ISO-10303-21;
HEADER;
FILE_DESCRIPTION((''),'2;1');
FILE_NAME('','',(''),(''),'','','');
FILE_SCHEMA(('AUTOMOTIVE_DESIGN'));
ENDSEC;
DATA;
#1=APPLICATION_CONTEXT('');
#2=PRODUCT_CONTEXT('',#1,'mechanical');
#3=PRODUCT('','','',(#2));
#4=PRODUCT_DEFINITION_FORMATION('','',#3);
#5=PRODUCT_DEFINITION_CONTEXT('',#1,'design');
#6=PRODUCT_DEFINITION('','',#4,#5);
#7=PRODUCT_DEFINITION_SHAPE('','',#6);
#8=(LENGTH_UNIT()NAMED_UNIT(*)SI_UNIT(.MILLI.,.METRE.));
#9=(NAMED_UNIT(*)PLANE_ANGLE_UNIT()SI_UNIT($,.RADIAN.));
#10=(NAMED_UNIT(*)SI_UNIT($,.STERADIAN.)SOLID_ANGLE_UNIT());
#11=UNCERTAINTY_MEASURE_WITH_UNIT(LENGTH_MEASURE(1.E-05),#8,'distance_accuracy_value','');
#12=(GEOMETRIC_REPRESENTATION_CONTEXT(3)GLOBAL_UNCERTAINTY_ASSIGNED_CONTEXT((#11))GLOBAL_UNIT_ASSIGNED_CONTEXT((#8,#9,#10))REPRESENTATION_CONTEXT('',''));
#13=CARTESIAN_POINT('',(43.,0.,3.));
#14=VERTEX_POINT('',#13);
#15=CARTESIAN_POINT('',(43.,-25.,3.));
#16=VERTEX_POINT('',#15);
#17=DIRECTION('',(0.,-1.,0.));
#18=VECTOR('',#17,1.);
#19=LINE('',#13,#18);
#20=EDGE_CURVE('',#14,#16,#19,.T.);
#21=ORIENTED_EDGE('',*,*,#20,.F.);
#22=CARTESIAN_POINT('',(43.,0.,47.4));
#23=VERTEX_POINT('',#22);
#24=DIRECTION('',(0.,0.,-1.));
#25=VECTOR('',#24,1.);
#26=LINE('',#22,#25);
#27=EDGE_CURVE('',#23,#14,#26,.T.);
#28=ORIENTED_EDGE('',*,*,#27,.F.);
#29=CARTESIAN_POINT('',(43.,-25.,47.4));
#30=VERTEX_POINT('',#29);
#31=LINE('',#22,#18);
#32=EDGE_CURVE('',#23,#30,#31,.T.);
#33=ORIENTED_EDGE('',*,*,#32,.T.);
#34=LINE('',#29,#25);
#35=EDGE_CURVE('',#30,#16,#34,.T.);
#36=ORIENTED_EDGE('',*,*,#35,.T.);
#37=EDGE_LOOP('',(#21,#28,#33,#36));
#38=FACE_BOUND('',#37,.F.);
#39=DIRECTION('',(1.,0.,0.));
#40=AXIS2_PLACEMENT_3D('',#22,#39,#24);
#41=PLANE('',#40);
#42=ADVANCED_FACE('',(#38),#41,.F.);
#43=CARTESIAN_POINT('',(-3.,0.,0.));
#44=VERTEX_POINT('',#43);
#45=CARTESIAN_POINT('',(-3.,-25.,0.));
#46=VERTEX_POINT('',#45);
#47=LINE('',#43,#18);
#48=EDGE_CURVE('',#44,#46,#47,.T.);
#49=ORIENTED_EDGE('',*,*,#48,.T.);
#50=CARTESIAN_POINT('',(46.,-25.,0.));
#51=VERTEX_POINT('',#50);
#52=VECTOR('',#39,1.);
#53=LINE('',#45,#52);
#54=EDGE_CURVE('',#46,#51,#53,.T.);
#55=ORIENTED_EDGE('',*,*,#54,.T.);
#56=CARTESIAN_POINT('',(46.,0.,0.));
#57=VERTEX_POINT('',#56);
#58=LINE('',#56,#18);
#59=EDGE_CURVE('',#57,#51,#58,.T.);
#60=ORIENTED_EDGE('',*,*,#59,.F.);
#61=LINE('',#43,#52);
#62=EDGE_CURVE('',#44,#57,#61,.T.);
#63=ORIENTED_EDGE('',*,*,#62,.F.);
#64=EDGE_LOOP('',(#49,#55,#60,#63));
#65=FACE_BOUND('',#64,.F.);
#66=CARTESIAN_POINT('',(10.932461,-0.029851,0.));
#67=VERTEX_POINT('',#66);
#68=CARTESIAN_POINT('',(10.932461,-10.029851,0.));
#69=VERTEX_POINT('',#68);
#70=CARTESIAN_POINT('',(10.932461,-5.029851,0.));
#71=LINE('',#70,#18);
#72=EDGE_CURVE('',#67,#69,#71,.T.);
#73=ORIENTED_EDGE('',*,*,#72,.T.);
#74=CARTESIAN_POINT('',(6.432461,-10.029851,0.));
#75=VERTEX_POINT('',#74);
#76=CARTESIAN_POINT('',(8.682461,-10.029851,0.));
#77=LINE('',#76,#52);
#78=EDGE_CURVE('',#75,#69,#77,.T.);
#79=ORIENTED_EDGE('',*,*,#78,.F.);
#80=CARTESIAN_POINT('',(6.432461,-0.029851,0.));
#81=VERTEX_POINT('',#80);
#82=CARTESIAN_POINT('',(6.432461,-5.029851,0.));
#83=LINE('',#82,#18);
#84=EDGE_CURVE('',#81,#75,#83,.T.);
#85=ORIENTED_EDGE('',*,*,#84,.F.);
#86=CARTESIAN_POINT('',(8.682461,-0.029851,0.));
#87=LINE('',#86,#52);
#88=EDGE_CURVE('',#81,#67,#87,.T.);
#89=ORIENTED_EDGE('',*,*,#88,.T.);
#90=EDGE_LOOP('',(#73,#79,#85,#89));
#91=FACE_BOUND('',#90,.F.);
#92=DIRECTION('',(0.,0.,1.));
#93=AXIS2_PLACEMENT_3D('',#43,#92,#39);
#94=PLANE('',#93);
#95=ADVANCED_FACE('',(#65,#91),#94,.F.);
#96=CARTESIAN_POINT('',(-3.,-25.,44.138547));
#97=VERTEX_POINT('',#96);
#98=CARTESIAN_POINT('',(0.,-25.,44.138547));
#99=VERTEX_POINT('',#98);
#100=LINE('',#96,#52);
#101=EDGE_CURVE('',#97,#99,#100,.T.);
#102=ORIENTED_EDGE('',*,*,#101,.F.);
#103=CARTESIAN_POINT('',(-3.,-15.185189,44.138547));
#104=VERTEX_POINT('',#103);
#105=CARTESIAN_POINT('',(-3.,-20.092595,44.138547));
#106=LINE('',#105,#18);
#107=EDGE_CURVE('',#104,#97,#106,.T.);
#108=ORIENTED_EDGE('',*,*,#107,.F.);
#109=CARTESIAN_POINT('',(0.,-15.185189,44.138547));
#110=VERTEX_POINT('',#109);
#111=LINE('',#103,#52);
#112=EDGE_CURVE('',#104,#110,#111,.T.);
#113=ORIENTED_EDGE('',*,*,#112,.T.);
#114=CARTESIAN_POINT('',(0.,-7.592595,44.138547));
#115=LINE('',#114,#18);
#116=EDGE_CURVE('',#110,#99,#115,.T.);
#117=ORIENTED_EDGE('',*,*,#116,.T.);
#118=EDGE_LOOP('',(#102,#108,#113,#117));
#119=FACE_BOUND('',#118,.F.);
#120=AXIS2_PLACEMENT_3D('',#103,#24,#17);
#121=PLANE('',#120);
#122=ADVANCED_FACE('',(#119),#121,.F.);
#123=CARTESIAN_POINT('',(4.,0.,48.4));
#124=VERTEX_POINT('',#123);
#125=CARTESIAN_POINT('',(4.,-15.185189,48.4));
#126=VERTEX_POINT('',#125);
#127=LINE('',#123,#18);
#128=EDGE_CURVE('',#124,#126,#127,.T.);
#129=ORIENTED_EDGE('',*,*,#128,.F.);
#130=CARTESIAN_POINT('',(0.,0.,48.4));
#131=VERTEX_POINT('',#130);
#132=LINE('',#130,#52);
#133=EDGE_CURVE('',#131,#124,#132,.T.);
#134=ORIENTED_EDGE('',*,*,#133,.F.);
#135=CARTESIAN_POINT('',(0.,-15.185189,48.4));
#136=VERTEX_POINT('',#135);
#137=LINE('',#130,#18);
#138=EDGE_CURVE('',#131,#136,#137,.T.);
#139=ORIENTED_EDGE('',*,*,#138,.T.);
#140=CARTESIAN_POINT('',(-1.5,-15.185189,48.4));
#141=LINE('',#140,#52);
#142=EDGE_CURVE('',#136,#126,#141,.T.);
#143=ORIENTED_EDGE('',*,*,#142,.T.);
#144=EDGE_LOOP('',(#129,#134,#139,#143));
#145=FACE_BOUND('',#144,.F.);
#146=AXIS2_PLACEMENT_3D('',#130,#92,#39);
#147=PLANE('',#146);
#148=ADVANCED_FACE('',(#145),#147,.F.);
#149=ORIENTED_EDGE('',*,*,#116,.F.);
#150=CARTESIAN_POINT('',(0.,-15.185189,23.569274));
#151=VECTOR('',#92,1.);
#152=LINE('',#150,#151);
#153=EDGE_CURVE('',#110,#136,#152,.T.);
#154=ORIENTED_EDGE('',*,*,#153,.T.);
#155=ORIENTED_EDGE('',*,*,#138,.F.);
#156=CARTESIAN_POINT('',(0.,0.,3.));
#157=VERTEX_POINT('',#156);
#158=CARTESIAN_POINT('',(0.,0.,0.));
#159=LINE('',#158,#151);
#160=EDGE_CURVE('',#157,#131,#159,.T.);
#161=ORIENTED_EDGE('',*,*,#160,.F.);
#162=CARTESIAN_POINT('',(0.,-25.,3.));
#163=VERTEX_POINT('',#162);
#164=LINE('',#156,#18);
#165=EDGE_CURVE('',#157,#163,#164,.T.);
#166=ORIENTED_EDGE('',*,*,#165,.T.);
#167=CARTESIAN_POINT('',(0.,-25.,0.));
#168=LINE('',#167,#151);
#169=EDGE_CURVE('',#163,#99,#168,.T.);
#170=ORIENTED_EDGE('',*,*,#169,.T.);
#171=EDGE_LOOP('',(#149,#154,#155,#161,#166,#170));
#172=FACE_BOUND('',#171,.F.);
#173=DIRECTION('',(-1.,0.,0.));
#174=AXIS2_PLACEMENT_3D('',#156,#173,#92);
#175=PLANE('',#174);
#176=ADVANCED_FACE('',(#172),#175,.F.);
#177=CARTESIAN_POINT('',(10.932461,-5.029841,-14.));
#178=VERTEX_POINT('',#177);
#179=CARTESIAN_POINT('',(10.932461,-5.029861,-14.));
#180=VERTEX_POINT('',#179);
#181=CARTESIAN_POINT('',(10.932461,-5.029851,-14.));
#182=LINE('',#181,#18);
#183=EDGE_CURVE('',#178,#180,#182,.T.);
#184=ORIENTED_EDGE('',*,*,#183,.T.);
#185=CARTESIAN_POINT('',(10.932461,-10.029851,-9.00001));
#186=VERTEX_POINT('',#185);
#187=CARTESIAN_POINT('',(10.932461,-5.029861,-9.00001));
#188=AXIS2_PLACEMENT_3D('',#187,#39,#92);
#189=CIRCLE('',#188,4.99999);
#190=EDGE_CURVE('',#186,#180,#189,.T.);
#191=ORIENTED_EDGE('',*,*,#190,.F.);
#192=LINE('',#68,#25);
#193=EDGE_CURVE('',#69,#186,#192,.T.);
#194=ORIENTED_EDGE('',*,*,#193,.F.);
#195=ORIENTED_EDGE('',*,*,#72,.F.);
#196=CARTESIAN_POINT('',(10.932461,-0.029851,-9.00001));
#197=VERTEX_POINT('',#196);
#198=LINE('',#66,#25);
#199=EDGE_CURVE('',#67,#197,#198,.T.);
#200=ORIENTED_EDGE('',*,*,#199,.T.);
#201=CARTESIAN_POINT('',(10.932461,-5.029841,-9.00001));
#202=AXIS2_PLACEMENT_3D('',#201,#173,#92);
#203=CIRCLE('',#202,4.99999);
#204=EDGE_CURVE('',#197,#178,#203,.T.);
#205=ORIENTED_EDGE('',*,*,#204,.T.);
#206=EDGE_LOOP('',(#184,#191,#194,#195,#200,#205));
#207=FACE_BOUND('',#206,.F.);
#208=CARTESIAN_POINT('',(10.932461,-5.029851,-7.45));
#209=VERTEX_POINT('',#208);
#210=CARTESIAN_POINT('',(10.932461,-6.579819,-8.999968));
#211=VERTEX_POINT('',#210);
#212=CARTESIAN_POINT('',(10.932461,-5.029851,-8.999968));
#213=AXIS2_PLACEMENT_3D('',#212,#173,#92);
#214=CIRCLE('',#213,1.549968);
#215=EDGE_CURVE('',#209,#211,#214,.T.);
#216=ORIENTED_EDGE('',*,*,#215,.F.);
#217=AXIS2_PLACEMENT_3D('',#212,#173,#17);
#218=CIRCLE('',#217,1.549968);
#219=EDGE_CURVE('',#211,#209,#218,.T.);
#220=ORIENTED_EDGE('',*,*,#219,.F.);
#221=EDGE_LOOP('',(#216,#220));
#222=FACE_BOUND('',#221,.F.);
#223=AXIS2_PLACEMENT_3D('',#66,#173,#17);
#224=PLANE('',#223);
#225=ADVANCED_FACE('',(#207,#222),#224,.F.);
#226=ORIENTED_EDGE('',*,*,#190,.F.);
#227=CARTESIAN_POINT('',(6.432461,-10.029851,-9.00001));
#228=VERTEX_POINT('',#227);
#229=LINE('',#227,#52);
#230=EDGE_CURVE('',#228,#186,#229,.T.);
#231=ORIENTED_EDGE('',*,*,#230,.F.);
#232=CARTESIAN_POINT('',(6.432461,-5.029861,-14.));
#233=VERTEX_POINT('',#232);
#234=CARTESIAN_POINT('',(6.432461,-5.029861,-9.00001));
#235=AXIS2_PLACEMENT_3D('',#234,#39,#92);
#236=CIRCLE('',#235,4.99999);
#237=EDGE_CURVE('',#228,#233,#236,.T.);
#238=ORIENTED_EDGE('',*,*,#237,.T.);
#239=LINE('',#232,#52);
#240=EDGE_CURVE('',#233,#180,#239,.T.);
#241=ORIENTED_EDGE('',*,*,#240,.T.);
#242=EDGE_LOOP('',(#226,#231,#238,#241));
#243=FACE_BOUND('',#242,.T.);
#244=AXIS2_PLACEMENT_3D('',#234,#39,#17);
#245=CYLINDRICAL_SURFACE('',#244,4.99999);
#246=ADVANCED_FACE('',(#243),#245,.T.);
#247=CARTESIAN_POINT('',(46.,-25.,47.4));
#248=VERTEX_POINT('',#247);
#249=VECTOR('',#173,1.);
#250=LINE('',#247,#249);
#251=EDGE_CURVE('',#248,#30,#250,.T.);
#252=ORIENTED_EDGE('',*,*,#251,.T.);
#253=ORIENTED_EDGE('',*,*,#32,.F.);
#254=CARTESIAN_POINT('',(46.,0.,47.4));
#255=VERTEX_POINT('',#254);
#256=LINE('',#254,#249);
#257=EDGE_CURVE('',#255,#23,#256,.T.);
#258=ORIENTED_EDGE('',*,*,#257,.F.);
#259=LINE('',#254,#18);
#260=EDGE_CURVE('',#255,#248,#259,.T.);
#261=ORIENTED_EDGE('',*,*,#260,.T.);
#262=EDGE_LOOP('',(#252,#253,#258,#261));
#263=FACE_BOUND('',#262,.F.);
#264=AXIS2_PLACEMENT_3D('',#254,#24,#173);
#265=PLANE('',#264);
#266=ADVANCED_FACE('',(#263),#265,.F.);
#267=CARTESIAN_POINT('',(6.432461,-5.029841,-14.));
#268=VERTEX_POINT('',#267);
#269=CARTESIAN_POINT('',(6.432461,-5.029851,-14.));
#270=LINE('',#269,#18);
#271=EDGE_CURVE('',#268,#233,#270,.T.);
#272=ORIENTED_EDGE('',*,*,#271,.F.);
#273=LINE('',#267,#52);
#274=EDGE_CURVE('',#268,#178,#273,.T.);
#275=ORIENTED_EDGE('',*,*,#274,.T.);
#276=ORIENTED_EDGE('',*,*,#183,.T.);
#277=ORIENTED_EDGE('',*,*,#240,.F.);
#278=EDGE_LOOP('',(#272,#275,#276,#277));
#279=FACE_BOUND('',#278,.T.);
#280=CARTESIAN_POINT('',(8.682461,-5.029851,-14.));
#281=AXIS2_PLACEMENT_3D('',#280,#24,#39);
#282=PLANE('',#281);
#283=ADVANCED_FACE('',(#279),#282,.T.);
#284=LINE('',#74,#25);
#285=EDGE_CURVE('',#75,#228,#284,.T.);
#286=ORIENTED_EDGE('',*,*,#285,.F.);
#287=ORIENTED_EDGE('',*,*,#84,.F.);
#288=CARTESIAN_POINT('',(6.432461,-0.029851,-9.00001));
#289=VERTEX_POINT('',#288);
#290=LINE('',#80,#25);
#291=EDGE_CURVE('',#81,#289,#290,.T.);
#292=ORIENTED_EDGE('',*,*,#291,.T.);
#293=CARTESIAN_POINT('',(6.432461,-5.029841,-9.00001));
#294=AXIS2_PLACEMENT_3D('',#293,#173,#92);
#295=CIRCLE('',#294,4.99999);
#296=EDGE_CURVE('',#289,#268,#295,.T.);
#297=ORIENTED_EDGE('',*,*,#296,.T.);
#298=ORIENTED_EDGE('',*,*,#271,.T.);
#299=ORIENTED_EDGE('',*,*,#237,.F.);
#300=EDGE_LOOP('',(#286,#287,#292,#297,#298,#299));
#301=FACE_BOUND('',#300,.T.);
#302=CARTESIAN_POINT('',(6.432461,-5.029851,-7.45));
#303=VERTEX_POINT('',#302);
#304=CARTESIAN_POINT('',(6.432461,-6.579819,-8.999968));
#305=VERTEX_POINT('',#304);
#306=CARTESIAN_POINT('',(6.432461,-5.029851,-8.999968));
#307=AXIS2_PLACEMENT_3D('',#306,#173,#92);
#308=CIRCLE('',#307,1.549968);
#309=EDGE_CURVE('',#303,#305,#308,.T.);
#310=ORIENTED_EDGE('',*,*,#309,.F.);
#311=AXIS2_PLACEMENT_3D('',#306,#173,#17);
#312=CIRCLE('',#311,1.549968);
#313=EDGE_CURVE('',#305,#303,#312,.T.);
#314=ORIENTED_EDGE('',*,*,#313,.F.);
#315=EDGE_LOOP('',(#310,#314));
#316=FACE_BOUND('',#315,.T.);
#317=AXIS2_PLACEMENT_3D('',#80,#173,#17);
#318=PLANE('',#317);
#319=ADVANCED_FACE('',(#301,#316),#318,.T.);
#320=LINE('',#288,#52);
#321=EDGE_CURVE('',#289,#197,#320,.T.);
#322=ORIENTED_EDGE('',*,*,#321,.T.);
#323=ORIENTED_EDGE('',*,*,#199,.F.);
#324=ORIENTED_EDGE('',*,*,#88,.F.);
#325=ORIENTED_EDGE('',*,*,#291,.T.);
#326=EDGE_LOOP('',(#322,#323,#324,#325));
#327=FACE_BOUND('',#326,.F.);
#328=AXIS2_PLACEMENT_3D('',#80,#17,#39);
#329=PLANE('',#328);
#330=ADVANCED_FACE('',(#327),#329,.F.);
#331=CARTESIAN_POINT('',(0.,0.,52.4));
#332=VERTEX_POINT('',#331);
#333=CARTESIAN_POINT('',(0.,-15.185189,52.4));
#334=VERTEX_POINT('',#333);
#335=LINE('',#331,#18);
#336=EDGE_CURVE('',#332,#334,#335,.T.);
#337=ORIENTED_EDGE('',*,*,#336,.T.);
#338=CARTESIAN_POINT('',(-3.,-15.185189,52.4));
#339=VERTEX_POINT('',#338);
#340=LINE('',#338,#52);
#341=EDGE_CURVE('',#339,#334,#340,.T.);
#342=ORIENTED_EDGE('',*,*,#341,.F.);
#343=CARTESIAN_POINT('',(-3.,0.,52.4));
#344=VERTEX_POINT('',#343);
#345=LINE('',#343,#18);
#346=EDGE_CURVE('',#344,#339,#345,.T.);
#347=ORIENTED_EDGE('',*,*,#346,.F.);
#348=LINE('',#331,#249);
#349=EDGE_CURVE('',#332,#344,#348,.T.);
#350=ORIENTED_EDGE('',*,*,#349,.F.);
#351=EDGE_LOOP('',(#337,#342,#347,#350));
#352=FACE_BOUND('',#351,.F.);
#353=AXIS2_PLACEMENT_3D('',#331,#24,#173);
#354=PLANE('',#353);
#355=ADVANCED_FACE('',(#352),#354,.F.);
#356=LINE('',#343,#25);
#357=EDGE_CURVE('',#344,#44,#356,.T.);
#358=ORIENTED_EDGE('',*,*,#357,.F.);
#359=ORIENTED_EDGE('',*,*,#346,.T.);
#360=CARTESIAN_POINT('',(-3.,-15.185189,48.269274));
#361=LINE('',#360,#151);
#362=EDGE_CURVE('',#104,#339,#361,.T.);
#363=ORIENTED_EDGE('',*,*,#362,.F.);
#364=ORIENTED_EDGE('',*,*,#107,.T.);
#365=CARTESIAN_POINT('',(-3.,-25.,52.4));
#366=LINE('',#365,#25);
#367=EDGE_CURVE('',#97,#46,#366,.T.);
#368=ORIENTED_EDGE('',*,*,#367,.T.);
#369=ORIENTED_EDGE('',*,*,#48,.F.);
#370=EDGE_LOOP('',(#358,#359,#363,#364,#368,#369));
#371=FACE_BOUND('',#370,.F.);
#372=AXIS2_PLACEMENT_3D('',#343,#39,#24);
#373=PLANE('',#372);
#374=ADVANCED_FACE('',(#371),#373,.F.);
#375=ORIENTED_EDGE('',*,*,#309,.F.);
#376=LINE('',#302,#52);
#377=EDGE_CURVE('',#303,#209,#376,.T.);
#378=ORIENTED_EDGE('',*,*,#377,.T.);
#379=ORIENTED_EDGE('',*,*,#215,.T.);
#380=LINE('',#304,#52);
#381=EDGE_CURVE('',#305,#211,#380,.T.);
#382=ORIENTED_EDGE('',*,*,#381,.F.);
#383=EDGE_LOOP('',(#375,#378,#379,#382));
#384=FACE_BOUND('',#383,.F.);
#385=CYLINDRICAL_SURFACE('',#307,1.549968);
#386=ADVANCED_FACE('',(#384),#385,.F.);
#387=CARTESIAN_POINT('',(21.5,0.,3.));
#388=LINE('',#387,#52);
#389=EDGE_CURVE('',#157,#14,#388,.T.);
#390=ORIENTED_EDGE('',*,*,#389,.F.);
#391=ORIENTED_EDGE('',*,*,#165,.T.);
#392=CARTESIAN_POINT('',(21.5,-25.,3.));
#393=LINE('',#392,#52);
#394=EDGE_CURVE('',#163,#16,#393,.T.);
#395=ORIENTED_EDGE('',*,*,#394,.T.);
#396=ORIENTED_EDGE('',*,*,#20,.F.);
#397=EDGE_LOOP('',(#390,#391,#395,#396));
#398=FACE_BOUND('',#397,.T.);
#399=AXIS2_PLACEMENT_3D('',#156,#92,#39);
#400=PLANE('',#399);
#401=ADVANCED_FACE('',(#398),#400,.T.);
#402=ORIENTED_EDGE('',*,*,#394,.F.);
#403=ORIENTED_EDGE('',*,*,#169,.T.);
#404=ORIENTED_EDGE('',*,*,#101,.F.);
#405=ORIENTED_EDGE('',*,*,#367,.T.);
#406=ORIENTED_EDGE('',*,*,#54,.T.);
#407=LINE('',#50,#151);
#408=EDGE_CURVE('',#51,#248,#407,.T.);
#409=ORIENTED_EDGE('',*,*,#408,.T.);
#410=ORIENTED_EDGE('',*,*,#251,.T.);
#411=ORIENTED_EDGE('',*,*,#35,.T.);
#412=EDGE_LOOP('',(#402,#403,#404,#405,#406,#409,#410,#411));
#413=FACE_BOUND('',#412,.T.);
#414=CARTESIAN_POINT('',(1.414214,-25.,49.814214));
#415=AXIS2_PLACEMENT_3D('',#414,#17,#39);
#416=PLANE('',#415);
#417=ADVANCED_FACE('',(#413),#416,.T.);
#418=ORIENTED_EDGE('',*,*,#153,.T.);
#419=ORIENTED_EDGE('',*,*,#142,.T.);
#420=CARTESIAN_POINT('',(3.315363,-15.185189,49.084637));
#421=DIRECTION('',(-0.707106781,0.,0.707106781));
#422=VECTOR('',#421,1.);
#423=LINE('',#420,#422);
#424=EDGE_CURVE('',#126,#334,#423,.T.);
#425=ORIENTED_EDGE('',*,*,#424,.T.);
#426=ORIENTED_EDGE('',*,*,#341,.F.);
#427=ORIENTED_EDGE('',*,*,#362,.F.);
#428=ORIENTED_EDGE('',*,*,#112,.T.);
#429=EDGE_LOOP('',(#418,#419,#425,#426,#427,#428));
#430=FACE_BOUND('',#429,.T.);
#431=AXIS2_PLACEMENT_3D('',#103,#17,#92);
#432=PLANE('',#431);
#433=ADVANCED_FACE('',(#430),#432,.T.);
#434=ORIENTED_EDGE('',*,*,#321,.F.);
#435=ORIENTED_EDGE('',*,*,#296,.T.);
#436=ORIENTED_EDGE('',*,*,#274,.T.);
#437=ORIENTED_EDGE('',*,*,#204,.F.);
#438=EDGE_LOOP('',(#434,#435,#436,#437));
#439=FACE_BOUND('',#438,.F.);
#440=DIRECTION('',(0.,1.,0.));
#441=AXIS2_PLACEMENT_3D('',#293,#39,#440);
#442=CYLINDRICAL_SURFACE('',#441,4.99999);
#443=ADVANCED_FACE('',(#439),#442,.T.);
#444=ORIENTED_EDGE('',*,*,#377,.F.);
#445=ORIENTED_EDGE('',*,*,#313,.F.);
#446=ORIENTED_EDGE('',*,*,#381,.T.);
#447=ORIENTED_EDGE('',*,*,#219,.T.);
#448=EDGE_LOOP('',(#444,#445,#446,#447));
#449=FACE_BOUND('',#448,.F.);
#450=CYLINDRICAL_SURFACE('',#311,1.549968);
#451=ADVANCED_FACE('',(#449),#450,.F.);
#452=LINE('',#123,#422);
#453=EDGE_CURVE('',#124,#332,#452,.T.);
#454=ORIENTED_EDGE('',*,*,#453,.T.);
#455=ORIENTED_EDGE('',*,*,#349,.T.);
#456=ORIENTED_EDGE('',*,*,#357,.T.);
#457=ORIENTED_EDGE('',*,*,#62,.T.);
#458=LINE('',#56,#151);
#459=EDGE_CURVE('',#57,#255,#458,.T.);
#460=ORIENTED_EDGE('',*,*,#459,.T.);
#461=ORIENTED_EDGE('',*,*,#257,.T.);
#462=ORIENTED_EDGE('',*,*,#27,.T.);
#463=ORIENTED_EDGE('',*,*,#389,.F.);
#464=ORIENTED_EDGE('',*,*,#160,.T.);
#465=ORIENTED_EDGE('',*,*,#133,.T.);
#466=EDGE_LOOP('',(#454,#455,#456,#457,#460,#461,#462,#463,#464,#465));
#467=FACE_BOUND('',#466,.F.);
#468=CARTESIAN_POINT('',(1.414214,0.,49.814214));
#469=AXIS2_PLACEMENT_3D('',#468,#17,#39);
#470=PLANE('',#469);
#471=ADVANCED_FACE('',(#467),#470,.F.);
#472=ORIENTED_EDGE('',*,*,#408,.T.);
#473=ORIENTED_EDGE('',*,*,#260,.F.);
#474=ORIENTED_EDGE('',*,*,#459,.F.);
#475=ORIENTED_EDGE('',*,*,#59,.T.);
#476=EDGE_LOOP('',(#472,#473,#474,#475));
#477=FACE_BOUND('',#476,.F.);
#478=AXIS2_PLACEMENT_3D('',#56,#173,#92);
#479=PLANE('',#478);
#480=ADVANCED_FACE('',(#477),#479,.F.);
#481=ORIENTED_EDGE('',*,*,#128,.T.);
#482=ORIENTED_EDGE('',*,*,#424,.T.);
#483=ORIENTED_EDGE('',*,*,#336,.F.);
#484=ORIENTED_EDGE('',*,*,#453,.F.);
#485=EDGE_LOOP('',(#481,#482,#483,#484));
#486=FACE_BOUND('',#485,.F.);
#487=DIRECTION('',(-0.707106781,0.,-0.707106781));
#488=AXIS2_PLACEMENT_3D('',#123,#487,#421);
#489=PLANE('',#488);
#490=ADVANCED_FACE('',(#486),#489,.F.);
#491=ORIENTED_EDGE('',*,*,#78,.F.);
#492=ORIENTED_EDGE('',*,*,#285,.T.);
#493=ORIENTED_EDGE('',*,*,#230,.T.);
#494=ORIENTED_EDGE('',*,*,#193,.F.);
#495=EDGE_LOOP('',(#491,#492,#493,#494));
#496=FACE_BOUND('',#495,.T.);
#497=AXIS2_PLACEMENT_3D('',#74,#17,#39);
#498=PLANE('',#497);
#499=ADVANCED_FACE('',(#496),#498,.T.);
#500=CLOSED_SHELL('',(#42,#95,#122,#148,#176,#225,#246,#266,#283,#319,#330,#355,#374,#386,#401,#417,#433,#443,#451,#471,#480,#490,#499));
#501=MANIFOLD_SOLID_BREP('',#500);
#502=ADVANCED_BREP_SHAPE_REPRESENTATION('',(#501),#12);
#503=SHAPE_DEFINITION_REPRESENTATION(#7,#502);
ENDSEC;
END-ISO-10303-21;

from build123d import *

# Parameters (mm, degrees)
F0_W     = 43
F0_H     = 3
F1_DEPTH = 25
F2_W     = 4.5
F2_H     = 10
F3_DEPTH = 14
F4_R     = 4.99999
F6_DEPTH = 5
F7_W     = 9.8148105666
F7_H     = 8.2614529669
F8_DEPTH = 7


# Not quite as in the source:
# - a fillet or chamfer is up to 0.001 mm smaller than in the source, because OpenCascade refuses the exact size


with BuildPart() as f1:
    # F0 (on Front) → F1 (new body)
    with BuildSketch(Plane.XZ):
        Polygon((0, 52.4), (0, 48.4), (4, 48.4), align=None)
        Polygon((-3, 0), (0, 0), (0, 3), (0, 48.4), (0, 52.4), (-3, 52.4), align=None)
        with Locations((21.5, 1.5)):
            Rectangle(F0_W, F0_H)
        Polygon((43, 3), (43, 0), (46, 0), (46, 47.4), (43, 47.4), align=None)
    extrude(amount=F1_DEPTH)

    # F2 (on face) → F3 (join)
    with BuildSketch(Plane(origin=(0, 0, 0), x_dir=(1, 0, 0), z_dir=(0, 0, -1))):
        with Locations((8.6824605241, 5.0298511051)):
            Rectangle(F2_W, F2_H)
    extrude(amount=F3_DEPTH)

    # F4 (radius 5 in the source; OpenCascade refuses exactly that, so slightly less here)
    f4_edges = [f1.edges().sort_by_distance(p)[0] for p in [
        (8.682461, -10.029851, -14),
        (8.682461, -0.029851, -14),
    ]]
    fillet(f4_edges, radius=F4_R)

    # F5 (on face) → F6 (cut)
    with BuildSketch(Plane(origin=(6.4324605241, 0, 0), x_dir=(0, -1, 0), z_dir=(-1, 0, 0))):
        with BuildLine():
            ThreePointArc((5.0298511051, -7.45), (3.9338580131, -10.0959613868), (6.5798194, -8.9999682949))
            ThreePointArc((6.5798194, -8.9999682949), (6.125844197, -7.9039752029), (5.0298511051, -7.45))
        make_face()
    extrude(amount=-F6_DEPTH, mode=Mode.SUBTRACT)

    # F7 (on face) → F8 (cut)
    with BuildSketch(Plane(origin=(-3, 0, 0), x_dir=(0, -1, 0), z_dir=(-1, 0, 0))):
        with Locations((20.0925947167, 48.2692735165)):
            Rectangle(F7_W, F7_H)
    extrude(amount=-F8_DEPTH, mode=Mode.SUBTRACT)


solid = f1.part
